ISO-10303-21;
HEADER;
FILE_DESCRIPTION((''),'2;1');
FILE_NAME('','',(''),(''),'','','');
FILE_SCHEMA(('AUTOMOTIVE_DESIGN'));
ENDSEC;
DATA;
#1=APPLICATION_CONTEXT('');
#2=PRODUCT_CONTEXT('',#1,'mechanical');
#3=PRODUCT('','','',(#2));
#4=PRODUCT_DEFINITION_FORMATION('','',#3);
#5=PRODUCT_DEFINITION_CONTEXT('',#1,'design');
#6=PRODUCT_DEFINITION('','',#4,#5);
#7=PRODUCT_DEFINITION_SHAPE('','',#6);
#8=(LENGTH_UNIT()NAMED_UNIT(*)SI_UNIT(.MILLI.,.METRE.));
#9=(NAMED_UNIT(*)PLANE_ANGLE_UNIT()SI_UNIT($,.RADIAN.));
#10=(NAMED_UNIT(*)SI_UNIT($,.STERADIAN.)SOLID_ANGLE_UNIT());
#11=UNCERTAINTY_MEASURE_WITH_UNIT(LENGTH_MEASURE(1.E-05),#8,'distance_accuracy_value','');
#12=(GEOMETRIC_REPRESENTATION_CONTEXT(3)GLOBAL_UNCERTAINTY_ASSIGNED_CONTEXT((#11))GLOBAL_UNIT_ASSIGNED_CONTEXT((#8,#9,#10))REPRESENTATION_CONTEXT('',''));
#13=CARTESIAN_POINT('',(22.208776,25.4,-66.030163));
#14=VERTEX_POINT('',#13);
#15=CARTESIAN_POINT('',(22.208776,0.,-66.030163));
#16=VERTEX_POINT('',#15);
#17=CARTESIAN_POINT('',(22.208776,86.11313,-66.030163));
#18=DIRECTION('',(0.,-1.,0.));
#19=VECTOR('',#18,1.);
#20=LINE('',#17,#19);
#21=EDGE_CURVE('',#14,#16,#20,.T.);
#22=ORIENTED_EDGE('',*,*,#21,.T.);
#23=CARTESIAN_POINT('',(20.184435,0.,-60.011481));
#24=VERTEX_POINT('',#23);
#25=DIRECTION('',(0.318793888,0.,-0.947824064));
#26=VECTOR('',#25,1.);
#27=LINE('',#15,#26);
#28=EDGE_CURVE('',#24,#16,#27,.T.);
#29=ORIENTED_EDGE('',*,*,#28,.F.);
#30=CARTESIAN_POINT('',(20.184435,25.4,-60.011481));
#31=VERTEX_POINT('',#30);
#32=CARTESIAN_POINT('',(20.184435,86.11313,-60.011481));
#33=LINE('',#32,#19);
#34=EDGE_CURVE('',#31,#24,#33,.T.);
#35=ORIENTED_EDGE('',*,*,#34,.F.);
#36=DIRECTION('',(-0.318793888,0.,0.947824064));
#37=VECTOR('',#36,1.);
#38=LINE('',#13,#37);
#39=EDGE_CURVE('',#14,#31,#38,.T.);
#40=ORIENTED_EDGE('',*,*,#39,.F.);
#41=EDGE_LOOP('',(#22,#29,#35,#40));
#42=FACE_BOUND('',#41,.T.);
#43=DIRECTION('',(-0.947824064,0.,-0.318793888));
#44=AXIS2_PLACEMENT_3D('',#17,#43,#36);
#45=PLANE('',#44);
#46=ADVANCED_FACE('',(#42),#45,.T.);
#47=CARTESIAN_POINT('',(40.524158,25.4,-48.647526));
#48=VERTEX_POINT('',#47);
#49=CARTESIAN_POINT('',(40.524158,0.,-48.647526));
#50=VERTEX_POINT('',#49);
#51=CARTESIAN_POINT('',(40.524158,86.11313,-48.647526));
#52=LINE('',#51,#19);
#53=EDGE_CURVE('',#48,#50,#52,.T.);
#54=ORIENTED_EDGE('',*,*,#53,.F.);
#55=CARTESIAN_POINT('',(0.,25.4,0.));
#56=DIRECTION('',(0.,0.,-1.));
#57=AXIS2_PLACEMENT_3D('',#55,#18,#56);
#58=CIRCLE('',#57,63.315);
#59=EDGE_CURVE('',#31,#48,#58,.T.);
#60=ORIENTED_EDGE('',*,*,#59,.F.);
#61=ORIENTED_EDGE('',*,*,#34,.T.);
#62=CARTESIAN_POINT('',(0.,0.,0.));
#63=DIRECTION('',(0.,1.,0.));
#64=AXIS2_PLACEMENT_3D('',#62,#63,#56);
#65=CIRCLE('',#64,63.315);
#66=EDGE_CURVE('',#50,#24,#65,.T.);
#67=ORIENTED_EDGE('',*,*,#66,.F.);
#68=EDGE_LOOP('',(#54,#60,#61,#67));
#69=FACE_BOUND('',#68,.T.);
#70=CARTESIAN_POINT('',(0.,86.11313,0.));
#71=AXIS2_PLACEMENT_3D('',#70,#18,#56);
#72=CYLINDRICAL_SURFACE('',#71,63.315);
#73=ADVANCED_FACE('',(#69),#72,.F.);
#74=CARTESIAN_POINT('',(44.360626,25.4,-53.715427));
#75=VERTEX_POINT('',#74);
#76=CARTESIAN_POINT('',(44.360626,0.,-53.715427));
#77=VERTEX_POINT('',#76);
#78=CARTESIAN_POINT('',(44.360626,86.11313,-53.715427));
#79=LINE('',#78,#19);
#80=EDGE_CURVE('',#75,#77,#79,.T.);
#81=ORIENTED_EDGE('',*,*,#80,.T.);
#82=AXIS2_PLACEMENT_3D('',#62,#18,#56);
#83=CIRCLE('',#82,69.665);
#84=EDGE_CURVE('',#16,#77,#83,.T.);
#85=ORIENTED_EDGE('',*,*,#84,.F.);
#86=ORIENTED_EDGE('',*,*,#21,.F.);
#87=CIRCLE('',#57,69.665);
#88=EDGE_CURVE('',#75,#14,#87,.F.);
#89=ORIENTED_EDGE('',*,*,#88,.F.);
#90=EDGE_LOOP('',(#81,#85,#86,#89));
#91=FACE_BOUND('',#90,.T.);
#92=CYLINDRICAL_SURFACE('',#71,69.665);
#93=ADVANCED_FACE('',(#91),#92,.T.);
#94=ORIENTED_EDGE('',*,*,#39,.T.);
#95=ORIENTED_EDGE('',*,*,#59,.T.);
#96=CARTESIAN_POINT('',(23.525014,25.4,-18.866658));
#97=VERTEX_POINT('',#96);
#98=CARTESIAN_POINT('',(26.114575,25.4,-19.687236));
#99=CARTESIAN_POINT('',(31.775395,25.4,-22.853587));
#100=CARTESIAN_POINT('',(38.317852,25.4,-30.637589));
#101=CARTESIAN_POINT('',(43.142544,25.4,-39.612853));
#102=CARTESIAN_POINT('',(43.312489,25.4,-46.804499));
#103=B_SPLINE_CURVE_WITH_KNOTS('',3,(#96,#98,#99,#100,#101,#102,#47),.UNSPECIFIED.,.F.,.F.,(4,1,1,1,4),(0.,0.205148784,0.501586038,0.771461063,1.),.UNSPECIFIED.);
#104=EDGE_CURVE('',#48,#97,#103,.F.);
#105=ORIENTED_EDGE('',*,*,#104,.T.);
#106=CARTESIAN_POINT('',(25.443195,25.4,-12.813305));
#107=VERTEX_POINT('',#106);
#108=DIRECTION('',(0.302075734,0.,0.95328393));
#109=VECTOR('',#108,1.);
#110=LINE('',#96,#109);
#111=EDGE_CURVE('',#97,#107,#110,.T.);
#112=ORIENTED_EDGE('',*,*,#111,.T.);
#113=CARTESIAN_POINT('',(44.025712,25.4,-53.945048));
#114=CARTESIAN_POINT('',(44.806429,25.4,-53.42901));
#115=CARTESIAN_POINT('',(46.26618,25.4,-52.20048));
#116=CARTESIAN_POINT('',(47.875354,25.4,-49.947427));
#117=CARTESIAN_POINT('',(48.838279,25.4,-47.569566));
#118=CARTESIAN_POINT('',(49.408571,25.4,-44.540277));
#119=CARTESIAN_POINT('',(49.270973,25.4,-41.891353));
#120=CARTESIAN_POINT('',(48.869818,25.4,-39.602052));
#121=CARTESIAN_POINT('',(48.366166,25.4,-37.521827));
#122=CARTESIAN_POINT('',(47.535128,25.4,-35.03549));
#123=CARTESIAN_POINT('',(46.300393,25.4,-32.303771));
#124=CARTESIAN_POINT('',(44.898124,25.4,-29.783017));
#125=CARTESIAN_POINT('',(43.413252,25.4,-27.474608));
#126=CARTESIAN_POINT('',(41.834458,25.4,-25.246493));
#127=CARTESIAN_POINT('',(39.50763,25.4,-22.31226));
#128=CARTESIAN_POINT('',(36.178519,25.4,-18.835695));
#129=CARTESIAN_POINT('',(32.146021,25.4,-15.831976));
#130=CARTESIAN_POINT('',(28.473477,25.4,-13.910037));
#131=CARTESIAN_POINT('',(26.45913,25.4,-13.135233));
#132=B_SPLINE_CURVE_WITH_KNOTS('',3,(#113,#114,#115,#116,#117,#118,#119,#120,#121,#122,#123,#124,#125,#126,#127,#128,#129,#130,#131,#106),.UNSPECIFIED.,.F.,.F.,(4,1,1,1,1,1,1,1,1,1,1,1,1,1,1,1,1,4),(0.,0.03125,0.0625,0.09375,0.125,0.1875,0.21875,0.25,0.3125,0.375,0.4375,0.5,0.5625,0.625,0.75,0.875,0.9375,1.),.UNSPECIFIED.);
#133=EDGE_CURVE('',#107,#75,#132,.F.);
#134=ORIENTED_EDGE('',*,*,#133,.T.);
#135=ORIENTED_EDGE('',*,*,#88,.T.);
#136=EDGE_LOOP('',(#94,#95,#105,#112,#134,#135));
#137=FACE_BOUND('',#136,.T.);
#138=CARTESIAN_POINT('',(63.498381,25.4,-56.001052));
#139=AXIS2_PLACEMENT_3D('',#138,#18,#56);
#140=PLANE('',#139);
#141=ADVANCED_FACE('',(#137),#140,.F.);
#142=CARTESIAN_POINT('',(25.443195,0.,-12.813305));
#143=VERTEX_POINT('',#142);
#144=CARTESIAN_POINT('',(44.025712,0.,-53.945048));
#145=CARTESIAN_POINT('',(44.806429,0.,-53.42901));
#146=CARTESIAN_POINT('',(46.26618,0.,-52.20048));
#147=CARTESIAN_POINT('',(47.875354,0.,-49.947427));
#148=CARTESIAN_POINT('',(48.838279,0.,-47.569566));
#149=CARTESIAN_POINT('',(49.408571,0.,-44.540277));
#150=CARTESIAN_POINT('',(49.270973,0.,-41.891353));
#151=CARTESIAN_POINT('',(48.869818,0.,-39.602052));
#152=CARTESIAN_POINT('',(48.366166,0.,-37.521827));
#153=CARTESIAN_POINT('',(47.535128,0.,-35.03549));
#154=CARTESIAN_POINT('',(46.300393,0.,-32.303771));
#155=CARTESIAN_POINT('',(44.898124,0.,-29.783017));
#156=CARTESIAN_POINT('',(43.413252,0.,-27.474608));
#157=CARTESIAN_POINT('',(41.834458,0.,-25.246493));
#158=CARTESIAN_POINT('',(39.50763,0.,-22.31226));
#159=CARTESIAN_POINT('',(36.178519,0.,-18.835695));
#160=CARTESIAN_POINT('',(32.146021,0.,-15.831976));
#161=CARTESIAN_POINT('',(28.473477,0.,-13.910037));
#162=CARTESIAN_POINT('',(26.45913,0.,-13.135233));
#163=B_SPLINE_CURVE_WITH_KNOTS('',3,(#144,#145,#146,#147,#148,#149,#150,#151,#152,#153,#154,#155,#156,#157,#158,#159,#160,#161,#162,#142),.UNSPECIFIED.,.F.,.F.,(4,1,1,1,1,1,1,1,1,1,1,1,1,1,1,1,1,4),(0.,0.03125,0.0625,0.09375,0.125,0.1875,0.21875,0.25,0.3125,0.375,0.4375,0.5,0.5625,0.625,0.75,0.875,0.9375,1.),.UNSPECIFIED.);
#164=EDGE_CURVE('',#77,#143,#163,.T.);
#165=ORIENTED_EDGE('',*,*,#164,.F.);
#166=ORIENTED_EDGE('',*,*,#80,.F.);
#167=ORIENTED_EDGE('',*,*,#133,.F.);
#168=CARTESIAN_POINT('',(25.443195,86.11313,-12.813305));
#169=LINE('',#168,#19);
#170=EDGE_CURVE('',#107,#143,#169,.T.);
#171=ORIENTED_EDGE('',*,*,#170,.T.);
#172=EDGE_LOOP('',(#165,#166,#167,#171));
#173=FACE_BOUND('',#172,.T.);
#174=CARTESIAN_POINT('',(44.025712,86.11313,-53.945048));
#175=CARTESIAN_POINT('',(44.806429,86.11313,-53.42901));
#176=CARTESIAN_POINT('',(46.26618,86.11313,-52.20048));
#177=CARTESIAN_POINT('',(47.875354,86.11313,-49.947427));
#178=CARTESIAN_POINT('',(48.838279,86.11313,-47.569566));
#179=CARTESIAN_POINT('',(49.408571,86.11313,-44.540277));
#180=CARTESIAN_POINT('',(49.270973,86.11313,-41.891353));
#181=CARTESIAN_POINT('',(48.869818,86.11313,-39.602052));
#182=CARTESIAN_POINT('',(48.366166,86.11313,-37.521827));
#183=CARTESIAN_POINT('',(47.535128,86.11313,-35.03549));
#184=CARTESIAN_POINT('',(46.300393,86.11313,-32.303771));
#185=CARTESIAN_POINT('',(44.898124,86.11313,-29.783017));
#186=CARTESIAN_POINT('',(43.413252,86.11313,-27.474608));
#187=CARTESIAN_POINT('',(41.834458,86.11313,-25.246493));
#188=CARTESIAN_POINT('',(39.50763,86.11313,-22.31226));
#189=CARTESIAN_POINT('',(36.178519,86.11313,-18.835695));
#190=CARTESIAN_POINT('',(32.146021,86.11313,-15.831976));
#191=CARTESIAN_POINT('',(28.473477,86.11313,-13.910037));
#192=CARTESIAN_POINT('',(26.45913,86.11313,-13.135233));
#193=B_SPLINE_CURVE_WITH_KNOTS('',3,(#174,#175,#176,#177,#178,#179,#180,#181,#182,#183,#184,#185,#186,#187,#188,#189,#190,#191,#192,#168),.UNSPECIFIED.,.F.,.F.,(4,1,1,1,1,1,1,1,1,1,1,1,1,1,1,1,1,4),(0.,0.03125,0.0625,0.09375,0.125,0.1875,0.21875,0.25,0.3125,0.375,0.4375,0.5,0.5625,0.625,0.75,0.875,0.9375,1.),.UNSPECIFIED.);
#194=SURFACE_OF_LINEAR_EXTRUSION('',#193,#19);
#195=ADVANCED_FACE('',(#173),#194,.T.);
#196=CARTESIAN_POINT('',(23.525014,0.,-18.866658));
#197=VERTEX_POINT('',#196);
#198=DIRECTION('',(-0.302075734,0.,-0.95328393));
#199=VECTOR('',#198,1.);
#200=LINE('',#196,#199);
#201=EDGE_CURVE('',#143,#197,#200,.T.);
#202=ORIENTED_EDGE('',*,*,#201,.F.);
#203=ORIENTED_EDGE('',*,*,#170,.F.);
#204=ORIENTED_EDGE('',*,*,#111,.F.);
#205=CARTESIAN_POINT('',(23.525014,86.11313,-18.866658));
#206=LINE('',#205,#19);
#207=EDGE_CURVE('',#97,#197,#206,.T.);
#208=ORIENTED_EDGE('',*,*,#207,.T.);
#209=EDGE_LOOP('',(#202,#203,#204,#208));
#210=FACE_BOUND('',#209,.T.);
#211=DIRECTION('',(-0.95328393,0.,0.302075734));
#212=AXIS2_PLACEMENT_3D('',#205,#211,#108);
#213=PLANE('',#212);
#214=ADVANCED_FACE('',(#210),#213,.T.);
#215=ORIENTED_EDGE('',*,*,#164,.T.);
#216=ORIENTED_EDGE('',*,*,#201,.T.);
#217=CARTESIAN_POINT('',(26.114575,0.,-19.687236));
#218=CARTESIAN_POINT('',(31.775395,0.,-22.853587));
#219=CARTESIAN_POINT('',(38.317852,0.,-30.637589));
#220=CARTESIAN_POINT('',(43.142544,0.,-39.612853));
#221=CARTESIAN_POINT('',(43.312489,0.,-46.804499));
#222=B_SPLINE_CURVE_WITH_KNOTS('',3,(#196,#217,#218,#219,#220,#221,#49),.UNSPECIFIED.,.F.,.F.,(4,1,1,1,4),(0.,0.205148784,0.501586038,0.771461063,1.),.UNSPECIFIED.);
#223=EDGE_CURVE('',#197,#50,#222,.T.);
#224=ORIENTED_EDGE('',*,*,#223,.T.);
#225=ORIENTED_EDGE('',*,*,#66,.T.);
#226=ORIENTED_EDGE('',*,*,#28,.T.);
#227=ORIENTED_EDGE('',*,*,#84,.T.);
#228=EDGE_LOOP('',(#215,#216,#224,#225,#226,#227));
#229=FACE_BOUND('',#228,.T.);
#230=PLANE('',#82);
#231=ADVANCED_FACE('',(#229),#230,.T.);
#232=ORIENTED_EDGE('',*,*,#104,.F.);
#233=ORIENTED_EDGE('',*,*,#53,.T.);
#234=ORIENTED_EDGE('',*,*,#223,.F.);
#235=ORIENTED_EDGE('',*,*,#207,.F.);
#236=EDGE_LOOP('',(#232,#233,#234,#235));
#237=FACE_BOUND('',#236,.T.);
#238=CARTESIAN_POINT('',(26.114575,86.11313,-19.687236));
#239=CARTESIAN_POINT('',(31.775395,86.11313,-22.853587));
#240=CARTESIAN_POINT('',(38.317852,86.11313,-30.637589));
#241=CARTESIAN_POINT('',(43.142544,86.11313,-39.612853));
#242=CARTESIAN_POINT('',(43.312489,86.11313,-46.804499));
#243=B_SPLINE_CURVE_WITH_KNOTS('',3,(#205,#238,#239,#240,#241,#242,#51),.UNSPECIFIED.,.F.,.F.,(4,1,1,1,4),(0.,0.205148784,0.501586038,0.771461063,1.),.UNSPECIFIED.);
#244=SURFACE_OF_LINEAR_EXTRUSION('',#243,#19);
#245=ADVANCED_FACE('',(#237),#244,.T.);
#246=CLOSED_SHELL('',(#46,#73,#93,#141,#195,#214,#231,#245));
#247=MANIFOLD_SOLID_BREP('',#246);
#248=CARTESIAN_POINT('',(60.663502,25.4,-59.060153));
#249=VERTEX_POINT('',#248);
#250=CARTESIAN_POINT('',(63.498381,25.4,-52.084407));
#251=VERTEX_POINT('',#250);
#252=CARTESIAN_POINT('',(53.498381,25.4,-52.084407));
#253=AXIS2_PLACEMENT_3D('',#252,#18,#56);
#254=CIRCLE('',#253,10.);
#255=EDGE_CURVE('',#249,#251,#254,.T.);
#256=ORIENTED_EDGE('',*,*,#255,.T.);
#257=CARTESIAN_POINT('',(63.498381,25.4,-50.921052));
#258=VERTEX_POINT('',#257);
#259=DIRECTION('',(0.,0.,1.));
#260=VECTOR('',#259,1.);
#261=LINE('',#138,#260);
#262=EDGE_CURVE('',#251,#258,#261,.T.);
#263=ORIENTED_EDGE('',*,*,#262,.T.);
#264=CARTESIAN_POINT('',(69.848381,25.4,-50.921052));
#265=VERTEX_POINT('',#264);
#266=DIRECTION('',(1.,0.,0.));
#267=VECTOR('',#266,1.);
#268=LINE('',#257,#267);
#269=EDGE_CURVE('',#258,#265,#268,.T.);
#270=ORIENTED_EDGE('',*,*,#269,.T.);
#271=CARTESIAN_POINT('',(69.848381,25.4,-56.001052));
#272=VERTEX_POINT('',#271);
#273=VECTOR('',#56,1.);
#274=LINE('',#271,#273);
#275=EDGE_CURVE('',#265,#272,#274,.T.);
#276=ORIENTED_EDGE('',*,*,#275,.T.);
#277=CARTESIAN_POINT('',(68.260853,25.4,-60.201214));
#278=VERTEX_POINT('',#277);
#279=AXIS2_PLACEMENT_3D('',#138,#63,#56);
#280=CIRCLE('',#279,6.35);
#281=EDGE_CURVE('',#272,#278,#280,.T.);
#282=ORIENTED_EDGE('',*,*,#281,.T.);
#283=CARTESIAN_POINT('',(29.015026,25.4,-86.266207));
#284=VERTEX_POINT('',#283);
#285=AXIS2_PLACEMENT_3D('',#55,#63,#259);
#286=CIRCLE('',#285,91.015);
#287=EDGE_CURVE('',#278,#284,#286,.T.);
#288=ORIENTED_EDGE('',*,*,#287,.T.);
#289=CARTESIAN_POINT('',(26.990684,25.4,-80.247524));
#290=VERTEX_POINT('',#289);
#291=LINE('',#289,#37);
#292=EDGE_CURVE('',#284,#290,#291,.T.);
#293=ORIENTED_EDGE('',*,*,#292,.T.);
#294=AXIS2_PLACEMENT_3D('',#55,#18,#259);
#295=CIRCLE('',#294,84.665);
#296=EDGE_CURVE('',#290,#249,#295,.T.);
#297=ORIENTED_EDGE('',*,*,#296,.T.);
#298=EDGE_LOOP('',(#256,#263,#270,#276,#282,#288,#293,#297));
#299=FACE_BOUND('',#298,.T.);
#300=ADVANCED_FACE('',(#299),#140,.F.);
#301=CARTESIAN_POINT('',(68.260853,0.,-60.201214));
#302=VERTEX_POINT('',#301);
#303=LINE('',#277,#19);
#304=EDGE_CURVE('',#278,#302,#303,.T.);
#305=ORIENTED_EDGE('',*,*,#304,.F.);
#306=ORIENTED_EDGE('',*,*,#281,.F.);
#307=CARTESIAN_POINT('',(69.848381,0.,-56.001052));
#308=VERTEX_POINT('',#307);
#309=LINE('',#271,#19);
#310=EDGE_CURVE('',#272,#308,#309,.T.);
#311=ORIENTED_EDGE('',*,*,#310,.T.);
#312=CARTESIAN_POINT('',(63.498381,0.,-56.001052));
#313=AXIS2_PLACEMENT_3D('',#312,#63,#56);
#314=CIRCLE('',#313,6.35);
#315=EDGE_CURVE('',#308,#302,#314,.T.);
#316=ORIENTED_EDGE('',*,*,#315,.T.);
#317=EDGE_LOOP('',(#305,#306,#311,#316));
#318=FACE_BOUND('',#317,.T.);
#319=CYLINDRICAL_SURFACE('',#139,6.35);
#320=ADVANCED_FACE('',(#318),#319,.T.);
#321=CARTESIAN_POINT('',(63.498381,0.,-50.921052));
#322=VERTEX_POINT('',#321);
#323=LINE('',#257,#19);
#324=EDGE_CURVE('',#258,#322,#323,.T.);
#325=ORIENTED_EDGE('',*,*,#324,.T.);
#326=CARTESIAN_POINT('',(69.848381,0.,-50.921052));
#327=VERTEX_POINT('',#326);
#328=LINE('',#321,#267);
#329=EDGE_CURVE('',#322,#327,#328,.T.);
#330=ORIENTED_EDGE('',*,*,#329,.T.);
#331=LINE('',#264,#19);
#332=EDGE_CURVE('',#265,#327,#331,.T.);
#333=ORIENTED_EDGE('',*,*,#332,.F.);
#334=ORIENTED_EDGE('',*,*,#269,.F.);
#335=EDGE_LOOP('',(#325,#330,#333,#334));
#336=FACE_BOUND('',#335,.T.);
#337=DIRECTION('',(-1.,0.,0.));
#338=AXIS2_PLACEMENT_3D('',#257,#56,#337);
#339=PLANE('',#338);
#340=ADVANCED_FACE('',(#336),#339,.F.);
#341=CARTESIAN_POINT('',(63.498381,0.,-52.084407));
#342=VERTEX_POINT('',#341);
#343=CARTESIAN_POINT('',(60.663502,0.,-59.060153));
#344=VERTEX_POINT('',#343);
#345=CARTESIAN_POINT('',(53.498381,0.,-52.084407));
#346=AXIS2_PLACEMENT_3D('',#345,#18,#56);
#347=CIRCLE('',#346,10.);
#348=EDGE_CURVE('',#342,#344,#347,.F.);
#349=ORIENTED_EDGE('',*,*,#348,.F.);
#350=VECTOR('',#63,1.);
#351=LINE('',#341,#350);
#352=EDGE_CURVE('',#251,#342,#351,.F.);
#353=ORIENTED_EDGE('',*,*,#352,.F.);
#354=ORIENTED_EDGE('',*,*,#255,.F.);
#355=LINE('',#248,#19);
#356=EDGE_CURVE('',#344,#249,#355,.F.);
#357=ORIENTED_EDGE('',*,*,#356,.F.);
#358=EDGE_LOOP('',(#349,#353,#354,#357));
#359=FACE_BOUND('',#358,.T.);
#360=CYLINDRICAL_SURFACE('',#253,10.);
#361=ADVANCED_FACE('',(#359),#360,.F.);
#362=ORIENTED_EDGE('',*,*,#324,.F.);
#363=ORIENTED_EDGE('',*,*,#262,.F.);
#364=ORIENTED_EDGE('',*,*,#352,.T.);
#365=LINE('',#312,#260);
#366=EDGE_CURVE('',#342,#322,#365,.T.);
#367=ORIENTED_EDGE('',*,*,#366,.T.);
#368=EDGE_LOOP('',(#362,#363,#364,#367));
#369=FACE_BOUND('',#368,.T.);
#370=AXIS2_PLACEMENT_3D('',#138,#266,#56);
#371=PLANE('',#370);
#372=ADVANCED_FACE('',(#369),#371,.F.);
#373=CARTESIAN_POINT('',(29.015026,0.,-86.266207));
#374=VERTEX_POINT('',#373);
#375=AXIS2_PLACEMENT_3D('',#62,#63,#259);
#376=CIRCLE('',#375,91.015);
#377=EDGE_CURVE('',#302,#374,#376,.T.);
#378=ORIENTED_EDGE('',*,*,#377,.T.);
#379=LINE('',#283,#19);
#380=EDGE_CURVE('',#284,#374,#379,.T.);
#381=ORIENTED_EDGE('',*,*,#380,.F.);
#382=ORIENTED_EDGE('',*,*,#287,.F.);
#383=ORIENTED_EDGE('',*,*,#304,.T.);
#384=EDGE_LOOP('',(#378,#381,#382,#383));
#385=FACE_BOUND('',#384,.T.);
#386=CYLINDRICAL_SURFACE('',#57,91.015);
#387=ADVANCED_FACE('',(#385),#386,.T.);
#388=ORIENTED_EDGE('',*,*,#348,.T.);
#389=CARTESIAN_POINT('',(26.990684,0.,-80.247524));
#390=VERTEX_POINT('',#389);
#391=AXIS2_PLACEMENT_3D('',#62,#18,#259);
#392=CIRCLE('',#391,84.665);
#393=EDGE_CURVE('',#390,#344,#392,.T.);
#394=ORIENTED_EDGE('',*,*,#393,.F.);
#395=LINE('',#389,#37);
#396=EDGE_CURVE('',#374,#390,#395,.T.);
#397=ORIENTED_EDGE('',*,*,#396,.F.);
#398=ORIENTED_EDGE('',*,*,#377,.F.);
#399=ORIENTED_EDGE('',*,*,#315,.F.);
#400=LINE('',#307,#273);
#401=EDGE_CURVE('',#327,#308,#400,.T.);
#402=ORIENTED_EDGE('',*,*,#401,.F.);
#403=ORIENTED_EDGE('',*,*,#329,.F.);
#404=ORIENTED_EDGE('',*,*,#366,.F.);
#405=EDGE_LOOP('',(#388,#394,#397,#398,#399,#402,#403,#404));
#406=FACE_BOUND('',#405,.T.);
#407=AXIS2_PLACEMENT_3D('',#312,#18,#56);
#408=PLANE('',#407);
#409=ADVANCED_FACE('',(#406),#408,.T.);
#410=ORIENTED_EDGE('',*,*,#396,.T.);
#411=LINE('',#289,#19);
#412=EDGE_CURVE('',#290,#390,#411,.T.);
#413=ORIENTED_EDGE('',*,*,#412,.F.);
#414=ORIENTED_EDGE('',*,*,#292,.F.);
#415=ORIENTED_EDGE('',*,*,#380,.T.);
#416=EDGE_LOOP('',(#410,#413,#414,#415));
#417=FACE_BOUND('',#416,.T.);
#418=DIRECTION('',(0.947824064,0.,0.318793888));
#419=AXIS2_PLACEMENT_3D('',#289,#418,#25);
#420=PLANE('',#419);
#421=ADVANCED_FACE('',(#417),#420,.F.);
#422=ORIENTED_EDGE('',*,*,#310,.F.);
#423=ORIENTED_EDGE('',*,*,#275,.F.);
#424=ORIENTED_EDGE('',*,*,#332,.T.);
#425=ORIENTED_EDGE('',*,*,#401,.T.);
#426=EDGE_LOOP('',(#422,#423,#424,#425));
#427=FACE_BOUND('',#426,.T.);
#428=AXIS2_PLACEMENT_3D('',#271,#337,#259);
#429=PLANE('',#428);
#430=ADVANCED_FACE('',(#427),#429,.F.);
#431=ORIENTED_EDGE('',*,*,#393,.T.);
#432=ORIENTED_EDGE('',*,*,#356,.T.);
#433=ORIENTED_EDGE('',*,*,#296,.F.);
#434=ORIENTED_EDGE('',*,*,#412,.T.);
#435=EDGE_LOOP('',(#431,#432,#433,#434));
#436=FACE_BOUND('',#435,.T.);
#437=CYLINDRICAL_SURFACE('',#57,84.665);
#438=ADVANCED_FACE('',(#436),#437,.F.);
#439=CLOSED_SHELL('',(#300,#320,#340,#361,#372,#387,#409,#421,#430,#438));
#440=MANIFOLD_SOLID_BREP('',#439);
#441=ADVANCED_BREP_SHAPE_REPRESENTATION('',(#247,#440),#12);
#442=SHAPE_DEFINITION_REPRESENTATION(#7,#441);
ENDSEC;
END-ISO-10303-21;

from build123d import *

# Parameters (mm, degrees)
BOSS_EXTRUDE1_DEPTH = 25.4
FILLET1_R           = 10
BOSS_EXTRUDE4_START = -25.4
BOSS_EXTRUDE4_DEPTH = 25.4


# Read off the part's stored shape, not the designer's step: Boss-Extrude4
with BuildPart() as part:
    # Sketch2 → Boss-Extrude1 (new body)
    with BuildSketch(Plane(origin=(0, 0, 0), x_dir=(1, 0, 0), z_dir=(0, 1, 0))):
        with BuildLine():
            Line((26.990684498, 80.247524419), (29.015025684, 86.266207228))
            ThreePointArc((29.015025684, 86.266207228), (50.353700038, 75.817116257), (68.260852948, 60.201214106))
            ThreePointArc((68.260852948, 60.201214106), (69.438254348, 58.246136107), (69.84838065, 56.001052489))
            Line((69.84838065, 56.001052489), (69.84838065, 50.921052489))
            Line((69.84838065, 50.921052489), (63.49838065, 50.921052489))
            Line((63.49838065, 50.921052489), (63.49838065, 56.001052489))
            ThreePointArc((63.49838065, 56.001052489), (46.840586867, 70.527453144), (26.990684498, 80.247524419))
        make_face()
    extrude(amount=BOSS_EXTRUDE1_DEPTH)

    # Fillet1
    fillet1_edges = [part.edges().sort_by_distance(p)[0] for p in [
        (63.49838065, 12.7, -56.001052489),
    ]]
    fillet(fillet1_edges, radius=FILLET1_R)


with BuildPart() as body_2:
    # Boss-Extrude4 outline → Boss-Extrude4 (new body)
    with BuildSketch(Plane.XZ.offset(BOSS_EXTRUDE4_START)):
        with BuildLine():
            Line((25.443194989, -12.813304883), (23.525014075, -18.866657837))
            add(Edge.make_bspline(
                [(23.525014075, -18.866657837), (26.114575337, -19.687235626), (31.775394583, -22.853586916), (38.317852456, -30.637589066), (43.142544067, -39.612852868), (43.312489198, -46.804499087), (40.524158317, -48.647526327)],
                knots=[0, 0, 0, 0, 0.205148784, 0.501586038, 0.771461063, 1, 1, 1, 1], degree=3))
            ThreePointArc((40.524158317, -48.647526327), (30.881518582, -55.273149314), (20.184434996, -60.011480642))
            Line((20.184434996, -60.011480642), (22.208776183, -66.030163452))
            ThreePointArc((22.208776183, -66.030163452), (33.849439104, -60.888649988), (44.360626436, -53.715426529))
            add(Edge.make_bspline(
                [(44.360626436, -53.715426529), (45.015216296, -53.250169824), (46.343641563, -52.092024645), (47.875354125, -49.947427349), (48.838279291, -47.569566152), (49.40857056, -44.540276682), (49.270972893, -41.891353114), (48.869817551, -39.602052244), (48.36616574, -37.521826688), (47.535128231, -35.035489663), (46.300392638, -32.303771245), (44.89812363, -29.783016532), (43.413252329, -27.47460777), (41.834458355, -25.246492838), (39.507630167, -22.312259754), (36.178518616, -18.835694792), (32.146020616, -15.831975993), (28.473476707, -13.910036954), (26.459130099, -13.13523271), (25.443194989, -12.813304883)],
                knots=[0.004512861, 0.004512861, 0.004512861, 0.004512861, 0.03125, 0.0625, 0.09375, 0.125, 0.1875, 0.21875, 0.25, 0.3125, 0.375, 0.4375, 0.5, 0.5625, 0.625, 0.75, 0.875, 0.9375, 1, 1, 1, 1], degree=3))
        make_face()
    extrude(amount=BOSS_EXTRUDE4_DEPTH)


solid = Compound([part.part, body_2.part])
